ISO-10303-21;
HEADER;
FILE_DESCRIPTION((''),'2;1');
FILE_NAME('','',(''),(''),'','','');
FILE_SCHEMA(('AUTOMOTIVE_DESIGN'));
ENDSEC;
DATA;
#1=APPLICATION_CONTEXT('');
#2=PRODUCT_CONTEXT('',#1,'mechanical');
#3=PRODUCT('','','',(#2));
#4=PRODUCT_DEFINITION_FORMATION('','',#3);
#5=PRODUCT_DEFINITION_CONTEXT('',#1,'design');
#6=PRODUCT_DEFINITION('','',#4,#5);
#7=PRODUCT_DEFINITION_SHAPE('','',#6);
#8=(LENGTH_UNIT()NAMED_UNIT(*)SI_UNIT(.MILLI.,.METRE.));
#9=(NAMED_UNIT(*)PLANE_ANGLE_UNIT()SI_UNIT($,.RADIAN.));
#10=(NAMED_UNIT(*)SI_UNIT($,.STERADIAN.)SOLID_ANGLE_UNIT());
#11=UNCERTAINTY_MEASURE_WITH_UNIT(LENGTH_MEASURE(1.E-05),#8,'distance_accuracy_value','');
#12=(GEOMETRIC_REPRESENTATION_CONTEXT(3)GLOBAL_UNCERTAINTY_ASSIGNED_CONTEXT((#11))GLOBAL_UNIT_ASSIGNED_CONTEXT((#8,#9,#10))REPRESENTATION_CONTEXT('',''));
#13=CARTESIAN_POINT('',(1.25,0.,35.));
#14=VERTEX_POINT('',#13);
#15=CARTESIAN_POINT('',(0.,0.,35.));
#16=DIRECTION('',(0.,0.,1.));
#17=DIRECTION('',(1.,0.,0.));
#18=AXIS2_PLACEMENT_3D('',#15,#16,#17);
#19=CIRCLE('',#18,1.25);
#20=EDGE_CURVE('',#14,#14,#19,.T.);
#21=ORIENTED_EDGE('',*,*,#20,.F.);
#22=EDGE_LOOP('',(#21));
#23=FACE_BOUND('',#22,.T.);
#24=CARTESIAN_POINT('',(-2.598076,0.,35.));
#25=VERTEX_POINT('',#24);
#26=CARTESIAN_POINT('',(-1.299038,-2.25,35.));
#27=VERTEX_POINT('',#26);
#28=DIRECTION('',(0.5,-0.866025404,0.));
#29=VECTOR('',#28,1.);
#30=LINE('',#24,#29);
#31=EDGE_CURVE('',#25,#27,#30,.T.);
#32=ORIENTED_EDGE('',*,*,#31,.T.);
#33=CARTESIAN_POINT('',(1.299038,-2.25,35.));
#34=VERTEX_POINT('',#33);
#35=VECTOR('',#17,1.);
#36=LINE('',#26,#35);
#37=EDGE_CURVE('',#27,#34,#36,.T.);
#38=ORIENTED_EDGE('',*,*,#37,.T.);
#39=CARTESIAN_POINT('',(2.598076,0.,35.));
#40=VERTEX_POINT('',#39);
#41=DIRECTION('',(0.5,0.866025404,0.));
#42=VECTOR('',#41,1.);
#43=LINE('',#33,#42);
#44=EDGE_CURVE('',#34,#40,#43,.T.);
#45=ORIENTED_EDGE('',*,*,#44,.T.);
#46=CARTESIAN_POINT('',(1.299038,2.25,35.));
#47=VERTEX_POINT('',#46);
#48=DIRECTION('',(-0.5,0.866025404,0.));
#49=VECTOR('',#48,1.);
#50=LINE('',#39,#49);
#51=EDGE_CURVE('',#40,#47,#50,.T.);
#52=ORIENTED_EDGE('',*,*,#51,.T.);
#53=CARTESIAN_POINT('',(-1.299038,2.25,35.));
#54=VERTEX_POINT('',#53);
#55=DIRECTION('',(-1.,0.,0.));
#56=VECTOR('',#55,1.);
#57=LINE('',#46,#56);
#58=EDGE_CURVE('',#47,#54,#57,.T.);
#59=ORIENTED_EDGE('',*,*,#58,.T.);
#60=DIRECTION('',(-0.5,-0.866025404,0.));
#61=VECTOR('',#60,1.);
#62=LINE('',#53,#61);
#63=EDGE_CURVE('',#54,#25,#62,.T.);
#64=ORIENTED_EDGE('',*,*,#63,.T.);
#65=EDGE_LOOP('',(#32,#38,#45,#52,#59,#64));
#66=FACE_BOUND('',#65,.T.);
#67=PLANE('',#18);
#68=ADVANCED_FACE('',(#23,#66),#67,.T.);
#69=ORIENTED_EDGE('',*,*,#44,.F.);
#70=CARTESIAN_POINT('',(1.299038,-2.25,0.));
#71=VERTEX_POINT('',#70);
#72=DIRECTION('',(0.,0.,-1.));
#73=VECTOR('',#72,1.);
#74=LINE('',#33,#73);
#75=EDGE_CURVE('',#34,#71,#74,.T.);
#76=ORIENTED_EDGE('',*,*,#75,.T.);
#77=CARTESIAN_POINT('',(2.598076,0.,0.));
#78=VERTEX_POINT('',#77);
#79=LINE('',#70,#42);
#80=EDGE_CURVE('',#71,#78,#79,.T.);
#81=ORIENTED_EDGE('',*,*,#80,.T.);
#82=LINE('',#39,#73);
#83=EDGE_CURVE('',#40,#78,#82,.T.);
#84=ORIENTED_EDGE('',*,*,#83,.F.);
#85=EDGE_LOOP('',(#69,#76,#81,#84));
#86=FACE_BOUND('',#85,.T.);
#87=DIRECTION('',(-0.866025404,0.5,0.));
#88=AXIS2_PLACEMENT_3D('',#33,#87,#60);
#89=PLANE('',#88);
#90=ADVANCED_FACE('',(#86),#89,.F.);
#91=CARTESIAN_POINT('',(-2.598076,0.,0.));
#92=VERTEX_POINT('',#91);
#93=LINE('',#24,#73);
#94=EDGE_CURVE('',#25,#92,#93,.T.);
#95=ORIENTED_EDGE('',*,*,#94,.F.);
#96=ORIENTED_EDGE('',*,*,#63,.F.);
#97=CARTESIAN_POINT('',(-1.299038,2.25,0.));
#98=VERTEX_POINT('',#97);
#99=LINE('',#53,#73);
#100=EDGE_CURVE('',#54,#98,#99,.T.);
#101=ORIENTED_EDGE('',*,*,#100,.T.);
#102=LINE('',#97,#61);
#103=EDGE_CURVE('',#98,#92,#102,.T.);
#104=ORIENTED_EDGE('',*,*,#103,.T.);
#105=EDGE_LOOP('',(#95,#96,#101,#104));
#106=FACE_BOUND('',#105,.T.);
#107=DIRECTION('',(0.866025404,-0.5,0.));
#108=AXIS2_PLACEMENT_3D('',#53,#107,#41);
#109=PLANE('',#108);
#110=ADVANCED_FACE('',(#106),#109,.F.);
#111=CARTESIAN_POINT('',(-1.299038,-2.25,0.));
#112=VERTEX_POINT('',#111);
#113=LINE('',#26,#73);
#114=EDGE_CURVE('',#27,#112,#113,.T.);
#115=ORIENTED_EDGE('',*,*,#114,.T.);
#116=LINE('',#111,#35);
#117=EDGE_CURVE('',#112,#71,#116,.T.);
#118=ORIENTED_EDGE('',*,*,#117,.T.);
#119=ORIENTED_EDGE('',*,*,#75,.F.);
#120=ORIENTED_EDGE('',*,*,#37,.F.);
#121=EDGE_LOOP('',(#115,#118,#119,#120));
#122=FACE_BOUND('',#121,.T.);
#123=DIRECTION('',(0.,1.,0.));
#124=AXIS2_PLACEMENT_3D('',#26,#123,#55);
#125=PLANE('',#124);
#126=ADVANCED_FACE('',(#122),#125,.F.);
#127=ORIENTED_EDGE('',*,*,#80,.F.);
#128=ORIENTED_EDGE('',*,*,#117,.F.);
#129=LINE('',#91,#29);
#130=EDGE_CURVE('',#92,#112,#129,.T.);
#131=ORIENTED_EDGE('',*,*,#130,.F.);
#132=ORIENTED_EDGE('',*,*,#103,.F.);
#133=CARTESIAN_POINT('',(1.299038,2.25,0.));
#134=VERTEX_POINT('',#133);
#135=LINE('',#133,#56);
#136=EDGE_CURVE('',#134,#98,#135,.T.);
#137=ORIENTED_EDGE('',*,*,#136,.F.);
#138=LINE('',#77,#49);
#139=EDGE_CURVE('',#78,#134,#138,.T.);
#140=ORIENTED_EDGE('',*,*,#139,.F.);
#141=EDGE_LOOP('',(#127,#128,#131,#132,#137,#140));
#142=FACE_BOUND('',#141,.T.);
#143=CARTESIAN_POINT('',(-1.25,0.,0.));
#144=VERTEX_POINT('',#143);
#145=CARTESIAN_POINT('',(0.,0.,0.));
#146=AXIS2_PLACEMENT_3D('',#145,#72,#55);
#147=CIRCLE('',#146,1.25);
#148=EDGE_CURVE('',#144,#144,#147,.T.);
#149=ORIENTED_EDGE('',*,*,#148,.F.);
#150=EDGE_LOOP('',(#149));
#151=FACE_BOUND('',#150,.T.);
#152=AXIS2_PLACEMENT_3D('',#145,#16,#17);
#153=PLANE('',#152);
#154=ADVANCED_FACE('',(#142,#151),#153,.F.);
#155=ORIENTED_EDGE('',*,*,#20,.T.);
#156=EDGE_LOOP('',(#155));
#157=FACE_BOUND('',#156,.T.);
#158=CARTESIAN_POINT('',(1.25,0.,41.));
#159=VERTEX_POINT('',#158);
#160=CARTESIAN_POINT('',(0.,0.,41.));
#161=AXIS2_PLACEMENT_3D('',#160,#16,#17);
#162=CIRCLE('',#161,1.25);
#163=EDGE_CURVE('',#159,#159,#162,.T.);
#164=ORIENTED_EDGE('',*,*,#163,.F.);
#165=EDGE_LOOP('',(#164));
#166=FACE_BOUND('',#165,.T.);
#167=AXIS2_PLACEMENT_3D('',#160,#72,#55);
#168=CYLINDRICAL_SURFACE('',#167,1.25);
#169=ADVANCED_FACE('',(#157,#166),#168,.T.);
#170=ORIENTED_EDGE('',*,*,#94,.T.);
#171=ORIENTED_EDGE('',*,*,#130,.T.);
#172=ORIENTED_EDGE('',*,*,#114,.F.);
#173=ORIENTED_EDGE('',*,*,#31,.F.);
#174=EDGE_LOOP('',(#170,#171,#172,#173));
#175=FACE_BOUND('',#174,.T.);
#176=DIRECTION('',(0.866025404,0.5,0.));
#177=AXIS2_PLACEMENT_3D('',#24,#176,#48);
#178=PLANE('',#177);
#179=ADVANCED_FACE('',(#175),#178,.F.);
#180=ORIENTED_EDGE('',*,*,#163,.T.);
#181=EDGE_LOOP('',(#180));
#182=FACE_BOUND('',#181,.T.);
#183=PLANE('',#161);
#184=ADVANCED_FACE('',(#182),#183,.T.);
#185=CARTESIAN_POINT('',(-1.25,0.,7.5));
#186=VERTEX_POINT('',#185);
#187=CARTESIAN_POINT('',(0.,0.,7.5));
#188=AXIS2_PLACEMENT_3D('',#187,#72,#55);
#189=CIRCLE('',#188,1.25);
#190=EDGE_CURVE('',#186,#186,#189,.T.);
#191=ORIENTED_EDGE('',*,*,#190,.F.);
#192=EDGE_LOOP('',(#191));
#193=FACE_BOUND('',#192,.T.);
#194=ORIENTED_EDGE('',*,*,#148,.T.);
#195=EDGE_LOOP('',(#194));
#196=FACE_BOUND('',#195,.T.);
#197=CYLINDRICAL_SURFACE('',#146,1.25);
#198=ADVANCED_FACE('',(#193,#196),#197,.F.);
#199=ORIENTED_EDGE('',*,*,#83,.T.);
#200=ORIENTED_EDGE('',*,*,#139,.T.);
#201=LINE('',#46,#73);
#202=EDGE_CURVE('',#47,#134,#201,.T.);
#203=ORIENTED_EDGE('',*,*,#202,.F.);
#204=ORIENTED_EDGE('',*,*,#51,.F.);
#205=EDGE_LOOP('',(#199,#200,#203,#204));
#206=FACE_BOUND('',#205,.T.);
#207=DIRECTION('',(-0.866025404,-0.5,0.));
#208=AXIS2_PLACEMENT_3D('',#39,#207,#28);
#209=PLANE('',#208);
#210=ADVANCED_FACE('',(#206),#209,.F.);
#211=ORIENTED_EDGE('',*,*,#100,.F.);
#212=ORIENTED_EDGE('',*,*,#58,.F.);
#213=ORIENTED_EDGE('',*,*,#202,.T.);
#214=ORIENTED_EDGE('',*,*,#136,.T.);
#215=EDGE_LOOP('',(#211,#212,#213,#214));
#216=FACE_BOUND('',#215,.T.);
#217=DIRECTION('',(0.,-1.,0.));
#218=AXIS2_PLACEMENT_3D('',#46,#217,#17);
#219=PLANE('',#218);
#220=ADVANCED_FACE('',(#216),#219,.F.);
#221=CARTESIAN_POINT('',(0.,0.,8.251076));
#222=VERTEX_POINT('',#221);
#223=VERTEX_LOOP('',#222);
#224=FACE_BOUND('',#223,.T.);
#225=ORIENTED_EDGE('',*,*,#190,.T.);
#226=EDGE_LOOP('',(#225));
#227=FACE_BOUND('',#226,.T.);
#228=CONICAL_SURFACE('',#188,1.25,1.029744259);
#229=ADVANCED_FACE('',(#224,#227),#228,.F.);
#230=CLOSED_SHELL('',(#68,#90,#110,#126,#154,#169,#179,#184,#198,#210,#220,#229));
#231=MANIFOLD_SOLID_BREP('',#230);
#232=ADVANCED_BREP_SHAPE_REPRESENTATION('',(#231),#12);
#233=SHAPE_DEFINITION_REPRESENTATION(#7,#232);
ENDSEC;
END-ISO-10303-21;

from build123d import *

# Parameters (mm, degrees)
EXTRUDE_1_DEPTH = 35
SKETCH_2_R      = 1.25
EXTRUDE_2_DEPTH = 6


# Read off the part's stored shape, not the designer's step: M3 螺纹孔1
with BuildPart() as part:
    # 草图1 → 凸台-拉伸1 (new body)
    with BuildSketch(Plane.XY):
        Polygon((2.598076211, 0), (1.299038106, 2.25), (-1.299038106, 2.25), (-2.598076211, 0), (-1.299038106, -2.25), (1.299038106, -2.25), align=None)
    extrude(amount=EXTRUDE_1_DEPTH)

    # 草图2 → 凸台-拉伸2 (add)
    with BuildSketch(Plane.XY.offset(35)):
        Circle(SKETCH_2_R)
    extrude(amount=EXTRUDE_2_DEPTH)

    # M3 螺纹孔1 outline → M3 螺纹孔1 (revolve, cut)
    with BuildSketch(Plane.XZ):
        Polygon((1.25, 7.5), (0, 8.251075774), (0, 0), (1.25, 0), align=None)
    revolve(axis=Axis((0, 0, 0), (0, 0, 1)), mode=Mode.SUBTRACT)


solid = part.part
